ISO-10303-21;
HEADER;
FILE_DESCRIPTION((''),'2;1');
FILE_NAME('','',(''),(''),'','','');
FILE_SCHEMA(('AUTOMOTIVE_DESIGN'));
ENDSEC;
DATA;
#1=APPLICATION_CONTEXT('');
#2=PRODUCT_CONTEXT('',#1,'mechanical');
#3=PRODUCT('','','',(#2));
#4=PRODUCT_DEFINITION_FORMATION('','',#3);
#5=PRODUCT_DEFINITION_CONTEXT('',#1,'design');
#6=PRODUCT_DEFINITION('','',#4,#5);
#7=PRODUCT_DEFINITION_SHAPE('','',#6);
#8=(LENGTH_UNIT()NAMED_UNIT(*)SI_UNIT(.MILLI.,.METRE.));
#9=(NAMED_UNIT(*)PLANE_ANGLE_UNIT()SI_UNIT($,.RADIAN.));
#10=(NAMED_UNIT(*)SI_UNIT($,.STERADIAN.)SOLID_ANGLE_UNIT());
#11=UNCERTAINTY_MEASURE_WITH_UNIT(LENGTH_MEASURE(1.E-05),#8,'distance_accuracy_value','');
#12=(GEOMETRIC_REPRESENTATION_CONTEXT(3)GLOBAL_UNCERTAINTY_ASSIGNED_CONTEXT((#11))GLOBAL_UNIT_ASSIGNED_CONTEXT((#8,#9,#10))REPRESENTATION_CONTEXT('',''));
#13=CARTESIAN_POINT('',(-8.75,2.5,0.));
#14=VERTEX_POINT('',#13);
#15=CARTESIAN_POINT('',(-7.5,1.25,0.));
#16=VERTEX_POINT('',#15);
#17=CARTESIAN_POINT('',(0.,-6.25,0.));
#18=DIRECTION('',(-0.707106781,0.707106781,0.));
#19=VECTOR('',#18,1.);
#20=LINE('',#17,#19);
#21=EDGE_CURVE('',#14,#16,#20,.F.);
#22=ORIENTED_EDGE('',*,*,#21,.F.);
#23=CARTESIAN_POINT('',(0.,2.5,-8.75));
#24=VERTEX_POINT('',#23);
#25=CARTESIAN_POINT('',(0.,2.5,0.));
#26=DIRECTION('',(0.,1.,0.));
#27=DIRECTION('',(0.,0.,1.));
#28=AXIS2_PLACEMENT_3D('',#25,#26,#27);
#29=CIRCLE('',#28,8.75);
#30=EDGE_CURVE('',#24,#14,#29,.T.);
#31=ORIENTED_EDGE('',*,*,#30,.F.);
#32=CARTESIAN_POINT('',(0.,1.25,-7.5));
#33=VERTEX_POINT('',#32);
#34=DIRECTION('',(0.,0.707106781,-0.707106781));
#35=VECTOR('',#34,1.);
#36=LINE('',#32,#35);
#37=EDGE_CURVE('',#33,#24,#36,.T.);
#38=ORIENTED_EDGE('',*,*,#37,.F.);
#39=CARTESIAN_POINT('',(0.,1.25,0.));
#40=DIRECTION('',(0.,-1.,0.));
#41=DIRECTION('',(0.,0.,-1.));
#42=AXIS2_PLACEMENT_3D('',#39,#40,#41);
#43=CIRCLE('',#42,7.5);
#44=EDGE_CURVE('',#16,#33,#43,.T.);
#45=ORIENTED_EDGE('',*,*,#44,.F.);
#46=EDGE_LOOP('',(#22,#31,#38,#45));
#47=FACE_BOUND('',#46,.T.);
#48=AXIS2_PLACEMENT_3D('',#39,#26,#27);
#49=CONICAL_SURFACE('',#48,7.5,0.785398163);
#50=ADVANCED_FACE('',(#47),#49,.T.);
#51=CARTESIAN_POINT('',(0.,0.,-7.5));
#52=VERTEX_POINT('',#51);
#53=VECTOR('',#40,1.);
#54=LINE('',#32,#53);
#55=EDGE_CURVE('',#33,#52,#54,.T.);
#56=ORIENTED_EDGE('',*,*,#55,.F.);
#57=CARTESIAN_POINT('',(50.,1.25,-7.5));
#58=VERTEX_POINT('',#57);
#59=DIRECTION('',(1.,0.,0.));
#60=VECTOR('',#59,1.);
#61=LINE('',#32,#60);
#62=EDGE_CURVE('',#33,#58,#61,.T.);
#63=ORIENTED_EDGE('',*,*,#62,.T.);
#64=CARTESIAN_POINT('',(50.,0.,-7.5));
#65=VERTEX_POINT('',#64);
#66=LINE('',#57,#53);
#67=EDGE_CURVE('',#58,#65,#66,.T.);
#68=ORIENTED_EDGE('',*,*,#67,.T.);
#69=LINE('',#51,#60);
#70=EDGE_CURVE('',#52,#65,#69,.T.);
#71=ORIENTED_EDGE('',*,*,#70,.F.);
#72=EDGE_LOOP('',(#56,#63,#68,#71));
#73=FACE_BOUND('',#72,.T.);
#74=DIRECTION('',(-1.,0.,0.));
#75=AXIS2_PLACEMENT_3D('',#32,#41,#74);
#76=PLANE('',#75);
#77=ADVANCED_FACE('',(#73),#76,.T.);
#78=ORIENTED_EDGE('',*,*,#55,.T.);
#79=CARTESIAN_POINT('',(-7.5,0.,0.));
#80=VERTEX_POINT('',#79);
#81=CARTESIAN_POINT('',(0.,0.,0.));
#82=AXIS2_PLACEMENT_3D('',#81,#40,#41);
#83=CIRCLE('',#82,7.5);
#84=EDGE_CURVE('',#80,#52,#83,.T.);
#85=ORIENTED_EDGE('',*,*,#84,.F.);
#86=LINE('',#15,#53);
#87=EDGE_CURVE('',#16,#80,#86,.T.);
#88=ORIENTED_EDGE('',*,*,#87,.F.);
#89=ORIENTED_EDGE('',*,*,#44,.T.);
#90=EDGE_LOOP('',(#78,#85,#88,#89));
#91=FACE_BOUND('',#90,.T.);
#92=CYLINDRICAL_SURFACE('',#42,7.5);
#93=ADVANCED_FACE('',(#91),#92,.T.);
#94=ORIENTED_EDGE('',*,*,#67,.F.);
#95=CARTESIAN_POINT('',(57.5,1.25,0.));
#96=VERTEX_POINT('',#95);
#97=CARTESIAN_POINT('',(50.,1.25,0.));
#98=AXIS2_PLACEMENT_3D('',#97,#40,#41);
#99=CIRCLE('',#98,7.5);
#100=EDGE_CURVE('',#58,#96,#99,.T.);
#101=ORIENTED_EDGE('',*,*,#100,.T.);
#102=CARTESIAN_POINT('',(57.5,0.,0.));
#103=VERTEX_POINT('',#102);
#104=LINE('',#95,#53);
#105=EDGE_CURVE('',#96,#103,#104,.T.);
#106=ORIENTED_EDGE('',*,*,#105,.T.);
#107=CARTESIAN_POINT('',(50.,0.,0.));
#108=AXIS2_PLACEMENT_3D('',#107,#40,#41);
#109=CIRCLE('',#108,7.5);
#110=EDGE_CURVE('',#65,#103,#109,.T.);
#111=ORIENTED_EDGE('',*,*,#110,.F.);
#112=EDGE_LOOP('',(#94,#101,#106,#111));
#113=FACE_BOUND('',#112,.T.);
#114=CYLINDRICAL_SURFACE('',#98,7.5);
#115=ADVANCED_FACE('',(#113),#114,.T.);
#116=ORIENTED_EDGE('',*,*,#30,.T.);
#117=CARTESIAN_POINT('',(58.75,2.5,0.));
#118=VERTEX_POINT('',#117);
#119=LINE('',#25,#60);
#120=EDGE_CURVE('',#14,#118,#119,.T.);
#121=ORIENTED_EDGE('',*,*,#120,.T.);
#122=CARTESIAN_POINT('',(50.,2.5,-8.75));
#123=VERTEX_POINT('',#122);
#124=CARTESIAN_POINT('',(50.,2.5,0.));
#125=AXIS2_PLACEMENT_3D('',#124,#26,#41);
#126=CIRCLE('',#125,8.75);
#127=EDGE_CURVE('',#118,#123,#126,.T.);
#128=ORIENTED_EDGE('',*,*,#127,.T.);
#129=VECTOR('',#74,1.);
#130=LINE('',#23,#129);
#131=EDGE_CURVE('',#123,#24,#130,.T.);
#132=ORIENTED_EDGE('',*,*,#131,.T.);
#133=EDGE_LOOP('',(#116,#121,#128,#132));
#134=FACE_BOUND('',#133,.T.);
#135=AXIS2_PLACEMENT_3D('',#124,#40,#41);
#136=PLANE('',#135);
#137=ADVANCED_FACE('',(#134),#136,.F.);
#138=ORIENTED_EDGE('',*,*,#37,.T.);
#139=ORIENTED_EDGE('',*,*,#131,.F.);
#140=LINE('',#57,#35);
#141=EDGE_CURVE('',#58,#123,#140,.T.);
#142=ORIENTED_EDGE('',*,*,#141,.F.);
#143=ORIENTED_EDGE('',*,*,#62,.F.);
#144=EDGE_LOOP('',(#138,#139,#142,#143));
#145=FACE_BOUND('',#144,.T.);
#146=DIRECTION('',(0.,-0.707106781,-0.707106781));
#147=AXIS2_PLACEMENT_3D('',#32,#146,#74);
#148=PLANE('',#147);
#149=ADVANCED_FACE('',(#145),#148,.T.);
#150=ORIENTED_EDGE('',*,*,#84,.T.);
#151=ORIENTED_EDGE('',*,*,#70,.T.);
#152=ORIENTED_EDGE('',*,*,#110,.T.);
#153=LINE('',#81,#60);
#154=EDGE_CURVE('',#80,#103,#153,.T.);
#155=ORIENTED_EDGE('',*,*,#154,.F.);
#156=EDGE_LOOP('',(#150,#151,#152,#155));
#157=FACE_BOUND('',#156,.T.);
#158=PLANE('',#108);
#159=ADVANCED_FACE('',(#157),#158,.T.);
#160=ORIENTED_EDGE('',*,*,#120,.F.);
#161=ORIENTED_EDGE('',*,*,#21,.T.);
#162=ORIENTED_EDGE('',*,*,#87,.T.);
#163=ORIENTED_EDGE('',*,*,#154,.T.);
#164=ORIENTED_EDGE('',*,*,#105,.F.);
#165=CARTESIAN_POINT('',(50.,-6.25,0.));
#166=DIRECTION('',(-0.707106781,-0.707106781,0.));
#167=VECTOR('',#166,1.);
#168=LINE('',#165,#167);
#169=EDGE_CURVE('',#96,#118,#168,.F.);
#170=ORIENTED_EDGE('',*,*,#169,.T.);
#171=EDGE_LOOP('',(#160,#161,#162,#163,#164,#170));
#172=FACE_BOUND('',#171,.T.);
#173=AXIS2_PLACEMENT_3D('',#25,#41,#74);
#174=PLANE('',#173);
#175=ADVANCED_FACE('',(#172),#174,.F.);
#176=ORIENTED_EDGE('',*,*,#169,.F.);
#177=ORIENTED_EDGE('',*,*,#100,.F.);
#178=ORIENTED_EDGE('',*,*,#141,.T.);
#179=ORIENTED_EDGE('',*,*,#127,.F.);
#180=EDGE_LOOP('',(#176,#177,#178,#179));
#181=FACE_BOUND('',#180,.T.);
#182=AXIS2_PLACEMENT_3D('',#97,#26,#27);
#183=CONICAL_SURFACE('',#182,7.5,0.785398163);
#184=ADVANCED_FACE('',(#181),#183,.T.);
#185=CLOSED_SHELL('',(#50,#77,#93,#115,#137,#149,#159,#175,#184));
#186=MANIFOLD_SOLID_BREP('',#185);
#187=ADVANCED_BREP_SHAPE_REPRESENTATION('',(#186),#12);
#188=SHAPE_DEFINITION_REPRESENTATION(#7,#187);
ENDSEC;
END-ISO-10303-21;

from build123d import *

# Parameters (mm, degrees)
BOSS_EXTRUDE1_DEPTH = 2.5
SKETCH3_W           = 50
SKETCH3_H           = 1.25
CUT_EXTRUDE2_DEPTH  = 1.25
CHAMFER2_SIZE       = 1.25


with BuildPart() as part:
    # Sketch1 → Boss-Extrude1 (new body)
    with BuildSketch(Plane(origin=(0, 0, 0), x_dir=(1, 0, 0), z_dir=(0, 1, 0))):
        with BuildLine():
            Line((0, 0), (-8.75, 0))
            ThreePointArc((-8.75, 0), (-6.187184335, 6.187184335), (0, 8.75))
            Line((0, 8.75), (50, 8.75))
            ThreePointArc((50, 8.75), (56.187184335, 6.187184335), (58.75, 0))
            Line((58.75, 0), (50, 0))
            Line((50, 0), (0, 0))
        make_face()
    extrude(amount=BOSS_EXTRUDE1_DEPTH)

    # Sketch3 → Cut-Extrude2 (cut)
    with BuildSketch(Plane.XZ):
        with BuildLine():
            Line((58.75, 0), (57.5, 0))
            ThreePointArc((57.5, 0), (55.303300859, -5.303300859), (50, -7.5))
            Line((50, -7.5), (50, -8.75))
            ThreePointArc((50, -8.75), (56.187184335, -6.187184335), (58.75, 0))
        make_face()
        with Locations((25, -8.125)):
            Rectangle(SKETCH3_W, SKETCH3_H)
        with BuildLine():
            Line((-7.5, 0), (-8.75, 0))
            ThreePointArc((-8.75, 0), (-6.187184335, -6.187184335), (0, -8.75))
            Line((0, -8.75), (0, -7.5))
            ThreePointArc((0, -7.5), (-5.303300859, -5.303300859), (-7.5, 0))
        make_face()
    extrude(amount=-CUT_EXTRUDE2_DEPTH, mode=Mode.SUBTRACT)

    # Chamfer2
    chamfer2_edges = [part.edges().sort_by_distance(p)[0] for p in [
        (56.187184335, 1.25, -6.187184335),
        (25, 1.25, -8.75),
        (-6.187184335, 1.25, -6.187184335),
    ]]
    chamfer(chamfer2_edges, length=CHAMFER2_SIZE - 0.0001)  # a hair under: the kernel refuses the full size


solid = part.part
